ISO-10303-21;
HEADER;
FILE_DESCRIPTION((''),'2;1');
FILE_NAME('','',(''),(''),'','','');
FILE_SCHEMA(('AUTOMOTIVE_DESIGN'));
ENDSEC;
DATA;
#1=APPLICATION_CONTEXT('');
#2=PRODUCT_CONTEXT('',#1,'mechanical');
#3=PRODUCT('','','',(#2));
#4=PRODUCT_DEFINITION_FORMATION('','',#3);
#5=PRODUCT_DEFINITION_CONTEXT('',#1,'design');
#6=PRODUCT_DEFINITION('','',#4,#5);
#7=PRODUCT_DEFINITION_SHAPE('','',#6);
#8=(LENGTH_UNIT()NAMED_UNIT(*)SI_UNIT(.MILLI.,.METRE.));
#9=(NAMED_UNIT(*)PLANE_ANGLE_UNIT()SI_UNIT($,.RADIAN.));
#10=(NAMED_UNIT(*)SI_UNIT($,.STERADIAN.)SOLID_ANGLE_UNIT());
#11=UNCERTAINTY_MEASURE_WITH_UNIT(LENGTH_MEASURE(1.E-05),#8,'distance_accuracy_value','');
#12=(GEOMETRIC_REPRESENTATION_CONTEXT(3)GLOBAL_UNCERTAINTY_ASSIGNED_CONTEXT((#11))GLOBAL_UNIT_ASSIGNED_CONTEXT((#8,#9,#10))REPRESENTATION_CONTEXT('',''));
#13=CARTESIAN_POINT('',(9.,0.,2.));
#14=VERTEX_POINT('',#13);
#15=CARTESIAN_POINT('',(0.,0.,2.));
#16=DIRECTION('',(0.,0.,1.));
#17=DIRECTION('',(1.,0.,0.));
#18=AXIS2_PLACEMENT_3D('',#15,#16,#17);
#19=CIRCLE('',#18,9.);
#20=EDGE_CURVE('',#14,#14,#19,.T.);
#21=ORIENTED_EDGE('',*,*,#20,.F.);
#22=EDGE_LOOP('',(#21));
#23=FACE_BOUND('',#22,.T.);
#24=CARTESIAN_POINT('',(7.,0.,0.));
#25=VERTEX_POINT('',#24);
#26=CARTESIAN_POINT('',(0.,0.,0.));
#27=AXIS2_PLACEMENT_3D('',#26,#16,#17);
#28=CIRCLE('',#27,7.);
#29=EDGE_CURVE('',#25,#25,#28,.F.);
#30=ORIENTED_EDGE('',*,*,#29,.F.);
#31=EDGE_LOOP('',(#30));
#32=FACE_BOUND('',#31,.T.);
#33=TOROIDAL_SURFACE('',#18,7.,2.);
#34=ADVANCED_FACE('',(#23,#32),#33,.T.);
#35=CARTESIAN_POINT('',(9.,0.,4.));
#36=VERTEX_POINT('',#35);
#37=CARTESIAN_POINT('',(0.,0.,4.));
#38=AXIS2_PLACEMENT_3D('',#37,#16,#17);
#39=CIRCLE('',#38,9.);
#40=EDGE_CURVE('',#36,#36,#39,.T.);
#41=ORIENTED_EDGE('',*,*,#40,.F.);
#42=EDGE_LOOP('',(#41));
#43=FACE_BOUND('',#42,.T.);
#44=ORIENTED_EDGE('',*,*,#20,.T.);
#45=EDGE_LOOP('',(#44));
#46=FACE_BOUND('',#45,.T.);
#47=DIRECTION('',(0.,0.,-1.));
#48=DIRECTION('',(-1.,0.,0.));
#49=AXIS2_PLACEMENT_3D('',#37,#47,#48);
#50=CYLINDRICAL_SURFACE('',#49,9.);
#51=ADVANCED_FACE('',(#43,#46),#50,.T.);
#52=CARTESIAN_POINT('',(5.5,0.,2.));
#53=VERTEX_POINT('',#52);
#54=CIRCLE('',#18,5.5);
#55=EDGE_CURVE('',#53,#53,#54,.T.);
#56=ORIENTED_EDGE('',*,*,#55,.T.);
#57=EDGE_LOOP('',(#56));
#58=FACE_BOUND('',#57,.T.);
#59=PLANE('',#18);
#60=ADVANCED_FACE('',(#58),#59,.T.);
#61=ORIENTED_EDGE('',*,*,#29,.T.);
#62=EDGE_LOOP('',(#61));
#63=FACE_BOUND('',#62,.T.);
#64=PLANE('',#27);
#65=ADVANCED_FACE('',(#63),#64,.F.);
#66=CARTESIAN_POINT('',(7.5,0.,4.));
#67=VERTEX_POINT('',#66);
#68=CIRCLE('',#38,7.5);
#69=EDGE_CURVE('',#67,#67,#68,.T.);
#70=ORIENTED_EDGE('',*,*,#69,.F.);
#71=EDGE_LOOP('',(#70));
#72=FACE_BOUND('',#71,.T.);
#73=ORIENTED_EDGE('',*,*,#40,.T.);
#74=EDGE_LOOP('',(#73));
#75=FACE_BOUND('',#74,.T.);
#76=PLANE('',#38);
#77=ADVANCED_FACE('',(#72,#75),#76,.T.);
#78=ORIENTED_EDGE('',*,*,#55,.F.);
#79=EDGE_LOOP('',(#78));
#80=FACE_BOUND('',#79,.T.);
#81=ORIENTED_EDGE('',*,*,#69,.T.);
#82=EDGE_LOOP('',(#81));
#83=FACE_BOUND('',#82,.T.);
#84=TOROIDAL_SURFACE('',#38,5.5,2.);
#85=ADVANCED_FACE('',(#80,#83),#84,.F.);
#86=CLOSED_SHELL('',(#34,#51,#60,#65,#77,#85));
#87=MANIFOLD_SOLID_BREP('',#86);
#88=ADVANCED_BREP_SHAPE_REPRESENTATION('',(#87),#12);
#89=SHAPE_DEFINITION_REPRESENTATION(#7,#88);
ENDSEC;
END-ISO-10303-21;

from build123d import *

# Parameters (mm, degrees)
SKETCH1_R           = 9
BOSS_EXTRUDE1_DEPTH = 4
SKETCH2_R           = 7.5
CUT_EXTRUDE1_DEPTH  = 2
FILLET1_R           = 2
FILLET2_R           = 2


with BuildPart() as part:
    # Sketch1 → Boss-Extrude1 (new body)
    with BuildSketch(Plane.XY):
        Circle(SKETCH1_R)
    extrude(amount=BOSS_EXTRUDE1_DEPTH)

    # Sketch2 → Cut-Extrude1 (cut)
    with BuildSketch(Plane.XY.offset(4)):
        Circle(SKETCH2_R)
    extrude(amount=-CUT_EXTRUDE1_DEPTH, mode=Mode.SUBTRACT)

    # Fillet1
    fillet1_edges = [part.edges().sort_by_distance(p)[0] for p in [
        (-9, 0, 0),
    ]]
    fillet(fillet1_edges, radius=FILLET1_R)

    # Fillet2
    fillet2_edges = [part.edges().sort_by_distance(p)[0] for p in [
        (-7.5, 0, 2),
    ]]
    fillet(fillet2_edges, radius=FILLET2_R - 0.0001)  # a hair under: the kernel refuses the full size


solid = part.part
